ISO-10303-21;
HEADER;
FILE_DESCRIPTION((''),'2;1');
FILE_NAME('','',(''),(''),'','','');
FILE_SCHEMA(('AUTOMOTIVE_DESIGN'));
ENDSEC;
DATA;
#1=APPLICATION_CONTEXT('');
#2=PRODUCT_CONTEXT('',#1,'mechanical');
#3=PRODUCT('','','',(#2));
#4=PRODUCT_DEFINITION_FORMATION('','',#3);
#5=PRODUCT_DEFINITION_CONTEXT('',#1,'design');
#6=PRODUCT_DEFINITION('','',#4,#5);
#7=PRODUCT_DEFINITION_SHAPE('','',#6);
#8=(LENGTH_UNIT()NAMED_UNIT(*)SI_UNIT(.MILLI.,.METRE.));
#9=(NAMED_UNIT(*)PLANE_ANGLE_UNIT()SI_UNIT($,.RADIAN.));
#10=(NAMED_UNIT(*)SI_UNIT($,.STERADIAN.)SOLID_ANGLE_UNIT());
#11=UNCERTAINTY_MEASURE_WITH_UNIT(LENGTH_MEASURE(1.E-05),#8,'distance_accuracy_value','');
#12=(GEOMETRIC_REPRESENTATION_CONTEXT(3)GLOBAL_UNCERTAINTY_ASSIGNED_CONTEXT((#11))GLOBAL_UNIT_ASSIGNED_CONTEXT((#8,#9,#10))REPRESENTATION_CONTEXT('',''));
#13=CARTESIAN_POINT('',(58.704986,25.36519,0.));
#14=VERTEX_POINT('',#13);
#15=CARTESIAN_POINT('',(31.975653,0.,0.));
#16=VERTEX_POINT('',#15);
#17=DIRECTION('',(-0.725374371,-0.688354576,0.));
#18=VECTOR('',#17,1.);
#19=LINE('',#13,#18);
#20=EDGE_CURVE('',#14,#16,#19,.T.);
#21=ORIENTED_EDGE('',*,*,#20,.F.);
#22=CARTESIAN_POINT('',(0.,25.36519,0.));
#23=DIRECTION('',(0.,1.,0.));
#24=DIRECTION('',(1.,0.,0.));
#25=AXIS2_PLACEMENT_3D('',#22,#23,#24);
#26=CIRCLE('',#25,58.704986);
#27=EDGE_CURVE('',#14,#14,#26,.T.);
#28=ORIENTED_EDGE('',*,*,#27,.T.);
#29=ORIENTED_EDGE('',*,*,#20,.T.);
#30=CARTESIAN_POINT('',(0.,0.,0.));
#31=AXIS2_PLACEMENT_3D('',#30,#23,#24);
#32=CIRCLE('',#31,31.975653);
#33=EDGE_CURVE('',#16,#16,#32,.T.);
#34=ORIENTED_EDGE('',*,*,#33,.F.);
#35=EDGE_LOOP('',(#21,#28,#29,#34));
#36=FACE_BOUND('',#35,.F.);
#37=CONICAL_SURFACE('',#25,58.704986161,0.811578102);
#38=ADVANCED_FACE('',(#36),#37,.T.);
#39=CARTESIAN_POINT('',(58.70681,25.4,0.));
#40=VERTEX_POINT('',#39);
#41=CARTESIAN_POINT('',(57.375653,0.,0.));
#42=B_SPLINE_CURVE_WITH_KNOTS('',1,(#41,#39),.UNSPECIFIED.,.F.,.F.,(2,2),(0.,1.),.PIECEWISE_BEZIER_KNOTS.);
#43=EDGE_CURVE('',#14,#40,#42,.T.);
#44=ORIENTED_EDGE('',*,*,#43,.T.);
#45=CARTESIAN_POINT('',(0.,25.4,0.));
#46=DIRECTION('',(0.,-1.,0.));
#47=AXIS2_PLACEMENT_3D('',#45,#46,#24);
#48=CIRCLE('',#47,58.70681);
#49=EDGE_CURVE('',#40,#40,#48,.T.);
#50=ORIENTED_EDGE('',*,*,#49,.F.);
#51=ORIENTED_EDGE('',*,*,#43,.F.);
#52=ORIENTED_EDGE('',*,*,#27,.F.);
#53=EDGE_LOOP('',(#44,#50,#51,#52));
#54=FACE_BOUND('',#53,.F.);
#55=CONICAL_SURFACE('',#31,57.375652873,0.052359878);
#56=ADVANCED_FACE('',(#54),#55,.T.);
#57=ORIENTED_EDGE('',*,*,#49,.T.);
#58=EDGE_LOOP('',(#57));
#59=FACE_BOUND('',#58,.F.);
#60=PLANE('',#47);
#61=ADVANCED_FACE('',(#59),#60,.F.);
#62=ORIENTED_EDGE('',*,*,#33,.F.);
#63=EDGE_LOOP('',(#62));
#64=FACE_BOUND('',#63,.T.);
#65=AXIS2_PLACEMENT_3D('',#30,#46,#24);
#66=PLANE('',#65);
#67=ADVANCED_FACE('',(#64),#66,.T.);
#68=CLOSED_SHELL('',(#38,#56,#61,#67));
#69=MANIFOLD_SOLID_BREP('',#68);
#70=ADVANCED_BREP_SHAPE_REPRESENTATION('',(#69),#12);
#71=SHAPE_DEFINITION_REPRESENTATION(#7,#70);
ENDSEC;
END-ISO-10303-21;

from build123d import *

# Parameters (mm, degrees)
F0_R     = 57.3756528728
F1_DEPTH = 25.4
F1_TAPER = -3


# Not quite as in the source:
# - a fillet or chamfer that OpenCascade refuses, or shapes differently, is made with other operations: its cross-section is extruded or revolved along the edge and cut away or added


with BuildPart() as f1:
    # F0 (on Front) → F1 (new body)
    with BuildSketch(Plane.XZ):
        Circle(F0_R)
    extrude(amount=-F1_DEPTH, taper=F1_TAPER)

    # F2: chamfer of 25.4 on 1 edges, made by hand

    # F2_s1 → F2_t2 (revolve, cut)
    with BuildSketch(Plane.XY):
        Polygon((58.7049861613, 25.3651901828), (31.9756528728, 0), (57.3756528728, 0), align=None)
    revolve(axis=Axis((0, 0, 0), (0, 1, 0)), mode=Mode.SUBTRACT)


solid = f1.part
